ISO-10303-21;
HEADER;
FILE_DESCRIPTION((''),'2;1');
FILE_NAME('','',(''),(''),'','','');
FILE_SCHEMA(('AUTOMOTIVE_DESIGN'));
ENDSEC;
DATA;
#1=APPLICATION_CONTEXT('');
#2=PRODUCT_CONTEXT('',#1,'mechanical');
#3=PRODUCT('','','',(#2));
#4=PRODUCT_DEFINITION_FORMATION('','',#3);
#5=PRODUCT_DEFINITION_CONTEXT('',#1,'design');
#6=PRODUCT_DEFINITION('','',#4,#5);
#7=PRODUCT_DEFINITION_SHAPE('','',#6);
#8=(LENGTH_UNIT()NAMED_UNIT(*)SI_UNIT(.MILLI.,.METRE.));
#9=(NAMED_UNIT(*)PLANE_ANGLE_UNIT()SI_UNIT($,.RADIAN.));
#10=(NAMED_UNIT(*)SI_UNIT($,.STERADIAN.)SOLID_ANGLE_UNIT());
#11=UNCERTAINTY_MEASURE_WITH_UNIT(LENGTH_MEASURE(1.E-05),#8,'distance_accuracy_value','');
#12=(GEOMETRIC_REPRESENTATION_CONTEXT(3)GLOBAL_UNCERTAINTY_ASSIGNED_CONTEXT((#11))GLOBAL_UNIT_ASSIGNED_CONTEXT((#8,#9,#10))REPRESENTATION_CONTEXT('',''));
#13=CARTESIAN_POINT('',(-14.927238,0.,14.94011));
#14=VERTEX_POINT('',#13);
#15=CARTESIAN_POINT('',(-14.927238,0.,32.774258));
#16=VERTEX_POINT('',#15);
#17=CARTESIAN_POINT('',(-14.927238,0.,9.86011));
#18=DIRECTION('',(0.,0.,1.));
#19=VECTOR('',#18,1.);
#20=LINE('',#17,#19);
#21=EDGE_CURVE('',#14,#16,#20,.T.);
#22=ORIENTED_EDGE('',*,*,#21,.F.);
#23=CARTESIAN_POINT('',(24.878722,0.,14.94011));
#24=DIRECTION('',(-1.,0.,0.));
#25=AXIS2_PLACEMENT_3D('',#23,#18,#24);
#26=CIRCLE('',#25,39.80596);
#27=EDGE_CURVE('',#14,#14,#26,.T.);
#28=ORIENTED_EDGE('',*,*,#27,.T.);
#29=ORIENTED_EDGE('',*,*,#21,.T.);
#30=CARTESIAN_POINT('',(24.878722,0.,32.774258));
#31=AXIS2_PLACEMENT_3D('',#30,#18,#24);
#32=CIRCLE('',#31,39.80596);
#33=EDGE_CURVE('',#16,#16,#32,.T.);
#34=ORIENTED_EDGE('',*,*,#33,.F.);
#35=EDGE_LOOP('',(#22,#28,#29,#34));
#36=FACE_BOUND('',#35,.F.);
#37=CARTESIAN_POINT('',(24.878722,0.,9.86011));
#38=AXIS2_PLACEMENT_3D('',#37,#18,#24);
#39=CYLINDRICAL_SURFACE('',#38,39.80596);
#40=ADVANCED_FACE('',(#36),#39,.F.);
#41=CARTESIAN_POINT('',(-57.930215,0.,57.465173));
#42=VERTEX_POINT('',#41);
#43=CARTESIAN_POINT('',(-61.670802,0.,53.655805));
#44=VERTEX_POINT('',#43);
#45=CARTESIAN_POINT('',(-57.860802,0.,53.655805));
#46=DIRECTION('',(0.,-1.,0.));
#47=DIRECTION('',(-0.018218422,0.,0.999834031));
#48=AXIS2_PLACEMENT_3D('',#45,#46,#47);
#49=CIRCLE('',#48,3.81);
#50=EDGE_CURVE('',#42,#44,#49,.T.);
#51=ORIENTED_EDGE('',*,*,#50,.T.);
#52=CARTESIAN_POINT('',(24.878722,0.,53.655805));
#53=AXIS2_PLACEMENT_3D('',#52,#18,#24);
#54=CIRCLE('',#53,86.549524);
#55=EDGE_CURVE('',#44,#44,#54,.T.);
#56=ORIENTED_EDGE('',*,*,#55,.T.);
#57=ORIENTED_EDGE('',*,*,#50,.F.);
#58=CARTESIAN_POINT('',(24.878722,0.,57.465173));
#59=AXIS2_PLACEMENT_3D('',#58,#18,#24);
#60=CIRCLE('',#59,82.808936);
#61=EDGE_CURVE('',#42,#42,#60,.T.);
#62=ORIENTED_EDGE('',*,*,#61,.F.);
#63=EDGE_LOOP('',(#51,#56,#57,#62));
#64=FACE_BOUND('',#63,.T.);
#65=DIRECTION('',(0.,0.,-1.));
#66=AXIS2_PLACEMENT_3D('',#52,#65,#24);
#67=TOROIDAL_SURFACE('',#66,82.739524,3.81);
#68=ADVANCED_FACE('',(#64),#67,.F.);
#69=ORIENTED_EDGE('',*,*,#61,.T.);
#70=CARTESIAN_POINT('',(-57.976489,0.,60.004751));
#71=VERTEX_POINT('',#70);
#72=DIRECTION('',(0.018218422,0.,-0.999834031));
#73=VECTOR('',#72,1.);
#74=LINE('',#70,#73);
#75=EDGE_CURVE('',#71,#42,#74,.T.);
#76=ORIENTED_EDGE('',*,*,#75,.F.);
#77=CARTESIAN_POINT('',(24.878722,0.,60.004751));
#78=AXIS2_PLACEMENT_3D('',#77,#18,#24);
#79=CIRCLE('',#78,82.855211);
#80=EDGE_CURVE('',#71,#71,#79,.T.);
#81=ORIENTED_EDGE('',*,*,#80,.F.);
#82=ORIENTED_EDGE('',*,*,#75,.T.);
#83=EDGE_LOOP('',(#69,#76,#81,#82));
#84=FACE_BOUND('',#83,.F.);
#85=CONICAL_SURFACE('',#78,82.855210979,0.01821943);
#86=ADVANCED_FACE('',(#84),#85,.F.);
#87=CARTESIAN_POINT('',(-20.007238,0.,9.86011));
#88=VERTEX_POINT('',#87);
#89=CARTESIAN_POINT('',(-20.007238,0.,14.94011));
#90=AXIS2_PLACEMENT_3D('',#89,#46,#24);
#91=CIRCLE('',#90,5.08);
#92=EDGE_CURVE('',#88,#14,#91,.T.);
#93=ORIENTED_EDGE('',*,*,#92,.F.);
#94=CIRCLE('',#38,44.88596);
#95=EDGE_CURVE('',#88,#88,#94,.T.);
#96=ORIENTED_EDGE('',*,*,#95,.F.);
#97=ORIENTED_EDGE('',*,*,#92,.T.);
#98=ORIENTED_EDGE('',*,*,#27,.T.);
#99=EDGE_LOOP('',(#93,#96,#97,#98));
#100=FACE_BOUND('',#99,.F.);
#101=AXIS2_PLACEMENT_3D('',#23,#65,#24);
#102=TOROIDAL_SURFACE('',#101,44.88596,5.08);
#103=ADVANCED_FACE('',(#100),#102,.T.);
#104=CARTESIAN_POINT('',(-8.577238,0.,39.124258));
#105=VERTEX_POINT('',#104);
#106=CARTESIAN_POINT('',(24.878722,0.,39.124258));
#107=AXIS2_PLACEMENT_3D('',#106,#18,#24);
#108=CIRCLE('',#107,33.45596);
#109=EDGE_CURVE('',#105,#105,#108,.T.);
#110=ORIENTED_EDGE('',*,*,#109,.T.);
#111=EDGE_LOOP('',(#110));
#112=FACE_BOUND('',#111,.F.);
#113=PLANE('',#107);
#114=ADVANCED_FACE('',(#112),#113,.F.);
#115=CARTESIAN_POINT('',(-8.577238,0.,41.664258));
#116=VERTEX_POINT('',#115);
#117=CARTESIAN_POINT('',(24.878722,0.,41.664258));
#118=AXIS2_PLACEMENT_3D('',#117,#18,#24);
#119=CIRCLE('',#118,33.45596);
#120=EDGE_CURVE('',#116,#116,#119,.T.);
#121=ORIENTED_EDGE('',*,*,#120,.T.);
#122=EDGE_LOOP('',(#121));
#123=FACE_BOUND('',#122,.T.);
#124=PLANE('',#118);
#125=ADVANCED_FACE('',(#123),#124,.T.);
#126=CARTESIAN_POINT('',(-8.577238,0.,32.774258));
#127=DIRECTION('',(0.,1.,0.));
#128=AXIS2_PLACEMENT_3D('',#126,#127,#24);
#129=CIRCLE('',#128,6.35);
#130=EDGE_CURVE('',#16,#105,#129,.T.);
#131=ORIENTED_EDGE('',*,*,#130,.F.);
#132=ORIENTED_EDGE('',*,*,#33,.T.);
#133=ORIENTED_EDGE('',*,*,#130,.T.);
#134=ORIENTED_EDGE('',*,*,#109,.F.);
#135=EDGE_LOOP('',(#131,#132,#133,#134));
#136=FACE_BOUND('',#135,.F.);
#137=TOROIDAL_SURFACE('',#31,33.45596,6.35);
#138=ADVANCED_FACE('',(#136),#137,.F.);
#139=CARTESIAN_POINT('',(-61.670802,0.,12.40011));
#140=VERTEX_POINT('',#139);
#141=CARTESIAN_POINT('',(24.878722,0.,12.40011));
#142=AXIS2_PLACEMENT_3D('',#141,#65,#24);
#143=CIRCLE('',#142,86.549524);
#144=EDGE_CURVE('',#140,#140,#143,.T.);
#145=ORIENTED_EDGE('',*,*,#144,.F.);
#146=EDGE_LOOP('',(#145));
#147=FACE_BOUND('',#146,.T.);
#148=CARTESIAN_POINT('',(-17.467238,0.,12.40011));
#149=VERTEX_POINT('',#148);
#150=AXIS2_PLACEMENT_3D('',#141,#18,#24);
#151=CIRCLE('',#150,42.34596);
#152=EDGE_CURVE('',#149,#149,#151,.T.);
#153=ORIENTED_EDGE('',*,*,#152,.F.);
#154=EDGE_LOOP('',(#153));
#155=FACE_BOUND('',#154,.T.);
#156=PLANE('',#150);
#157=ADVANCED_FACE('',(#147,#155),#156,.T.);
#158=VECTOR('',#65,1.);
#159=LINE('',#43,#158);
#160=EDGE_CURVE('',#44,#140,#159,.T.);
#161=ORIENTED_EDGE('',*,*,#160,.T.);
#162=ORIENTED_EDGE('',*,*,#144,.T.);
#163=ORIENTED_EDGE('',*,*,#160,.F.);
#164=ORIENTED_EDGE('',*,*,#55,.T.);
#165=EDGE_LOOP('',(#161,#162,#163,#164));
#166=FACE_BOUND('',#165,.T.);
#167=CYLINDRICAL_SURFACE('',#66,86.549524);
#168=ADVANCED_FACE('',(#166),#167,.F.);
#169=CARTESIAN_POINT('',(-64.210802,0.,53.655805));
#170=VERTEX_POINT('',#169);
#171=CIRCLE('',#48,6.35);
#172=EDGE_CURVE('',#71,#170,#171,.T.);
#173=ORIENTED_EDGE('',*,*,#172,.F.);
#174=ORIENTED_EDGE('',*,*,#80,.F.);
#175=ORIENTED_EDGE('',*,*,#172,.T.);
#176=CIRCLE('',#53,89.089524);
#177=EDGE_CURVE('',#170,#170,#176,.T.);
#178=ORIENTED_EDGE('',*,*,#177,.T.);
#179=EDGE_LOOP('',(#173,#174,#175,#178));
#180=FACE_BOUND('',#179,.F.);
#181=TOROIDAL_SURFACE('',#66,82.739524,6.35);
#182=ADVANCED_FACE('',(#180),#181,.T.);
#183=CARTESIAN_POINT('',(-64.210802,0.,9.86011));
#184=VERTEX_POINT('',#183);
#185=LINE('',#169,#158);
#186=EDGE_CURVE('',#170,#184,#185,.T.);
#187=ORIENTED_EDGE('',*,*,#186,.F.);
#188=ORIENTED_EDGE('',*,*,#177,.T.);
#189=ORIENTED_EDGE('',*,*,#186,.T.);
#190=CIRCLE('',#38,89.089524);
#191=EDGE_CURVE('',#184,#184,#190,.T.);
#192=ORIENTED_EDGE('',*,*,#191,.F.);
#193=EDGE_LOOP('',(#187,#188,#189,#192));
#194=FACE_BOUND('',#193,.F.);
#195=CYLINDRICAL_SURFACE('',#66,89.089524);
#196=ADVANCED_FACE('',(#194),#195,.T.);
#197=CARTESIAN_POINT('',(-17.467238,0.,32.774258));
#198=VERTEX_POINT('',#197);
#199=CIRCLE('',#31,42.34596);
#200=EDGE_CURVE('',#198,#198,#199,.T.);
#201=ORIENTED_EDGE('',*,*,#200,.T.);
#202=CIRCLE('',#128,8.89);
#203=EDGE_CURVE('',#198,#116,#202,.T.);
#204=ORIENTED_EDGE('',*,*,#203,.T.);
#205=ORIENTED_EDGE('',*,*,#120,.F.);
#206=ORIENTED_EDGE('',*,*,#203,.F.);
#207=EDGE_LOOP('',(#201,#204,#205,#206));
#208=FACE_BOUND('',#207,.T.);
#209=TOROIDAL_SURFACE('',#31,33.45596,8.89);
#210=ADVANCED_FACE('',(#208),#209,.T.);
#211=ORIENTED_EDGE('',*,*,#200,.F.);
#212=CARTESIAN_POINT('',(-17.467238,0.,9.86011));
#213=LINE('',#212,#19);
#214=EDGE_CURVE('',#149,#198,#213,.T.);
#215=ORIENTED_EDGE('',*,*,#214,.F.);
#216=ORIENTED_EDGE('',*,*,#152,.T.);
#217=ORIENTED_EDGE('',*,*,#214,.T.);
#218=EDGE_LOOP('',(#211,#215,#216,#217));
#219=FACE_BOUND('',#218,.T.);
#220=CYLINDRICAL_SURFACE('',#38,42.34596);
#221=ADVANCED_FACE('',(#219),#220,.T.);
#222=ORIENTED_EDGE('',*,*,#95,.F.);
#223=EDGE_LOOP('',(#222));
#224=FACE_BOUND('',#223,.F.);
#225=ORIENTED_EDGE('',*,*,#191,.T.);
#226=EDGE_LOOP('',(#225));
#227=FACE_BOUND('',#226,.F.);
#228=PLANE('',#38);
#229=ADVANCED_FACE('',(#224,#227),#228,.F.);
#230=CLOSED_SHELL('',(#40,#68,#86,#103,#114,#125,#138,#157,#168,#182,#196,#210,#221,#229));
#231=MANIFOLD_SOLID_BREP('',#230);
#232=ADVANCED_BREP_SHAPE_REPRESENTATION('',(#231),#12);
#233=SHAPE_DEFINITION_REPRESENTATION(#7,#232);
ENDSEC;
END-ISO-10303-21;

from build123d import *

# Parameters (mm, degrees)
F2_T = 2.54
F3_R = 5.08


# Not quite as in the source:
# - a shell that OpenCascade refuses in one call is made with other operations: the cavity is built on its own and cut out


with BuildPart() as f1:
    # F0 (on Front) → F1 (revolve)
    with BuildSketch(Plane.XZ):
        with BuildLine():
            ThreePointArc((-57.9764892951, 60.004751325), (-62.3916472883, 58.1048437598), (-64.2108023167, 53.6558052296))
            Line((-64.2108023167, 53.6558052296), (-64.2108023167, 9.8601095378))
            Line((-64.2108023167, 9.8601095378), (-14.9272382259, 9.8601095378))
            Line((-14.9272382259, 9.8601095378), (-14.9272382259, 32.7742578626))
            ThreePointArc((-14.9272382259, 32.7742578626), (-13.0673662865, 37.2643859231), (-8.5772382259, 39.1242578626))
            Line((-8.5772382259, 39.1242578626), (24.8787216842, 39.1242578626))
            Line((24.8787216842, 39.1242578626), (24.8787216842, 61.514493078))
            Line((24.8787216842, 61.514493078), (-57.9764892951, 60.004751325))
        make_face()
    revolve(axis=Axis((24.8787216842, 0, 50.3193754703), (0, 0, 1)))

    # F2: shell of thickness 2.54, made by hand


with BuildPart() as f2_core1:
    # F2_t2: copy of F1
    add(f1.part)

    # the walls: a layer under each face that stays
    f2_faces = [f2_core1.faces().sort_by_distance(p)[0] for p in [
        (112.1490906567, 0, 58.1048437598),
        (113.9682456851, 0, 31.7579573837),
        (84.2717376848, 59.3930160006, 9.8601095378),
        (64.6846815944, 0, 21.3171837002),
        (62.8248096549, 0, 37.2643859231),
        (24.8787216842, 0, 39.1242578626),
    ]]
    thicken(f2_faces, amount=-F2_T, mode=Mode.SUBTRACT)


with BuildPart() as f1_1:
    add(f1.part)

    # what is left inside the walls is the cavity
    f2_cavity = [f2_core1.part.solids().sort_by_distance(p)[0] for p in [
        (111.402846, 0, 39.903907),
    ]]
    add(f2_cavity, mode=Mode.SUBTRACT)

    # F3
    f3_edges = [f1_1.edges().sort_by_distance(p)[0] for p in [
        (64.684682, 0, 9.86011),
    ]]
    fillet(f3_edges, radius=F3_R)


solid = f1_1.part
